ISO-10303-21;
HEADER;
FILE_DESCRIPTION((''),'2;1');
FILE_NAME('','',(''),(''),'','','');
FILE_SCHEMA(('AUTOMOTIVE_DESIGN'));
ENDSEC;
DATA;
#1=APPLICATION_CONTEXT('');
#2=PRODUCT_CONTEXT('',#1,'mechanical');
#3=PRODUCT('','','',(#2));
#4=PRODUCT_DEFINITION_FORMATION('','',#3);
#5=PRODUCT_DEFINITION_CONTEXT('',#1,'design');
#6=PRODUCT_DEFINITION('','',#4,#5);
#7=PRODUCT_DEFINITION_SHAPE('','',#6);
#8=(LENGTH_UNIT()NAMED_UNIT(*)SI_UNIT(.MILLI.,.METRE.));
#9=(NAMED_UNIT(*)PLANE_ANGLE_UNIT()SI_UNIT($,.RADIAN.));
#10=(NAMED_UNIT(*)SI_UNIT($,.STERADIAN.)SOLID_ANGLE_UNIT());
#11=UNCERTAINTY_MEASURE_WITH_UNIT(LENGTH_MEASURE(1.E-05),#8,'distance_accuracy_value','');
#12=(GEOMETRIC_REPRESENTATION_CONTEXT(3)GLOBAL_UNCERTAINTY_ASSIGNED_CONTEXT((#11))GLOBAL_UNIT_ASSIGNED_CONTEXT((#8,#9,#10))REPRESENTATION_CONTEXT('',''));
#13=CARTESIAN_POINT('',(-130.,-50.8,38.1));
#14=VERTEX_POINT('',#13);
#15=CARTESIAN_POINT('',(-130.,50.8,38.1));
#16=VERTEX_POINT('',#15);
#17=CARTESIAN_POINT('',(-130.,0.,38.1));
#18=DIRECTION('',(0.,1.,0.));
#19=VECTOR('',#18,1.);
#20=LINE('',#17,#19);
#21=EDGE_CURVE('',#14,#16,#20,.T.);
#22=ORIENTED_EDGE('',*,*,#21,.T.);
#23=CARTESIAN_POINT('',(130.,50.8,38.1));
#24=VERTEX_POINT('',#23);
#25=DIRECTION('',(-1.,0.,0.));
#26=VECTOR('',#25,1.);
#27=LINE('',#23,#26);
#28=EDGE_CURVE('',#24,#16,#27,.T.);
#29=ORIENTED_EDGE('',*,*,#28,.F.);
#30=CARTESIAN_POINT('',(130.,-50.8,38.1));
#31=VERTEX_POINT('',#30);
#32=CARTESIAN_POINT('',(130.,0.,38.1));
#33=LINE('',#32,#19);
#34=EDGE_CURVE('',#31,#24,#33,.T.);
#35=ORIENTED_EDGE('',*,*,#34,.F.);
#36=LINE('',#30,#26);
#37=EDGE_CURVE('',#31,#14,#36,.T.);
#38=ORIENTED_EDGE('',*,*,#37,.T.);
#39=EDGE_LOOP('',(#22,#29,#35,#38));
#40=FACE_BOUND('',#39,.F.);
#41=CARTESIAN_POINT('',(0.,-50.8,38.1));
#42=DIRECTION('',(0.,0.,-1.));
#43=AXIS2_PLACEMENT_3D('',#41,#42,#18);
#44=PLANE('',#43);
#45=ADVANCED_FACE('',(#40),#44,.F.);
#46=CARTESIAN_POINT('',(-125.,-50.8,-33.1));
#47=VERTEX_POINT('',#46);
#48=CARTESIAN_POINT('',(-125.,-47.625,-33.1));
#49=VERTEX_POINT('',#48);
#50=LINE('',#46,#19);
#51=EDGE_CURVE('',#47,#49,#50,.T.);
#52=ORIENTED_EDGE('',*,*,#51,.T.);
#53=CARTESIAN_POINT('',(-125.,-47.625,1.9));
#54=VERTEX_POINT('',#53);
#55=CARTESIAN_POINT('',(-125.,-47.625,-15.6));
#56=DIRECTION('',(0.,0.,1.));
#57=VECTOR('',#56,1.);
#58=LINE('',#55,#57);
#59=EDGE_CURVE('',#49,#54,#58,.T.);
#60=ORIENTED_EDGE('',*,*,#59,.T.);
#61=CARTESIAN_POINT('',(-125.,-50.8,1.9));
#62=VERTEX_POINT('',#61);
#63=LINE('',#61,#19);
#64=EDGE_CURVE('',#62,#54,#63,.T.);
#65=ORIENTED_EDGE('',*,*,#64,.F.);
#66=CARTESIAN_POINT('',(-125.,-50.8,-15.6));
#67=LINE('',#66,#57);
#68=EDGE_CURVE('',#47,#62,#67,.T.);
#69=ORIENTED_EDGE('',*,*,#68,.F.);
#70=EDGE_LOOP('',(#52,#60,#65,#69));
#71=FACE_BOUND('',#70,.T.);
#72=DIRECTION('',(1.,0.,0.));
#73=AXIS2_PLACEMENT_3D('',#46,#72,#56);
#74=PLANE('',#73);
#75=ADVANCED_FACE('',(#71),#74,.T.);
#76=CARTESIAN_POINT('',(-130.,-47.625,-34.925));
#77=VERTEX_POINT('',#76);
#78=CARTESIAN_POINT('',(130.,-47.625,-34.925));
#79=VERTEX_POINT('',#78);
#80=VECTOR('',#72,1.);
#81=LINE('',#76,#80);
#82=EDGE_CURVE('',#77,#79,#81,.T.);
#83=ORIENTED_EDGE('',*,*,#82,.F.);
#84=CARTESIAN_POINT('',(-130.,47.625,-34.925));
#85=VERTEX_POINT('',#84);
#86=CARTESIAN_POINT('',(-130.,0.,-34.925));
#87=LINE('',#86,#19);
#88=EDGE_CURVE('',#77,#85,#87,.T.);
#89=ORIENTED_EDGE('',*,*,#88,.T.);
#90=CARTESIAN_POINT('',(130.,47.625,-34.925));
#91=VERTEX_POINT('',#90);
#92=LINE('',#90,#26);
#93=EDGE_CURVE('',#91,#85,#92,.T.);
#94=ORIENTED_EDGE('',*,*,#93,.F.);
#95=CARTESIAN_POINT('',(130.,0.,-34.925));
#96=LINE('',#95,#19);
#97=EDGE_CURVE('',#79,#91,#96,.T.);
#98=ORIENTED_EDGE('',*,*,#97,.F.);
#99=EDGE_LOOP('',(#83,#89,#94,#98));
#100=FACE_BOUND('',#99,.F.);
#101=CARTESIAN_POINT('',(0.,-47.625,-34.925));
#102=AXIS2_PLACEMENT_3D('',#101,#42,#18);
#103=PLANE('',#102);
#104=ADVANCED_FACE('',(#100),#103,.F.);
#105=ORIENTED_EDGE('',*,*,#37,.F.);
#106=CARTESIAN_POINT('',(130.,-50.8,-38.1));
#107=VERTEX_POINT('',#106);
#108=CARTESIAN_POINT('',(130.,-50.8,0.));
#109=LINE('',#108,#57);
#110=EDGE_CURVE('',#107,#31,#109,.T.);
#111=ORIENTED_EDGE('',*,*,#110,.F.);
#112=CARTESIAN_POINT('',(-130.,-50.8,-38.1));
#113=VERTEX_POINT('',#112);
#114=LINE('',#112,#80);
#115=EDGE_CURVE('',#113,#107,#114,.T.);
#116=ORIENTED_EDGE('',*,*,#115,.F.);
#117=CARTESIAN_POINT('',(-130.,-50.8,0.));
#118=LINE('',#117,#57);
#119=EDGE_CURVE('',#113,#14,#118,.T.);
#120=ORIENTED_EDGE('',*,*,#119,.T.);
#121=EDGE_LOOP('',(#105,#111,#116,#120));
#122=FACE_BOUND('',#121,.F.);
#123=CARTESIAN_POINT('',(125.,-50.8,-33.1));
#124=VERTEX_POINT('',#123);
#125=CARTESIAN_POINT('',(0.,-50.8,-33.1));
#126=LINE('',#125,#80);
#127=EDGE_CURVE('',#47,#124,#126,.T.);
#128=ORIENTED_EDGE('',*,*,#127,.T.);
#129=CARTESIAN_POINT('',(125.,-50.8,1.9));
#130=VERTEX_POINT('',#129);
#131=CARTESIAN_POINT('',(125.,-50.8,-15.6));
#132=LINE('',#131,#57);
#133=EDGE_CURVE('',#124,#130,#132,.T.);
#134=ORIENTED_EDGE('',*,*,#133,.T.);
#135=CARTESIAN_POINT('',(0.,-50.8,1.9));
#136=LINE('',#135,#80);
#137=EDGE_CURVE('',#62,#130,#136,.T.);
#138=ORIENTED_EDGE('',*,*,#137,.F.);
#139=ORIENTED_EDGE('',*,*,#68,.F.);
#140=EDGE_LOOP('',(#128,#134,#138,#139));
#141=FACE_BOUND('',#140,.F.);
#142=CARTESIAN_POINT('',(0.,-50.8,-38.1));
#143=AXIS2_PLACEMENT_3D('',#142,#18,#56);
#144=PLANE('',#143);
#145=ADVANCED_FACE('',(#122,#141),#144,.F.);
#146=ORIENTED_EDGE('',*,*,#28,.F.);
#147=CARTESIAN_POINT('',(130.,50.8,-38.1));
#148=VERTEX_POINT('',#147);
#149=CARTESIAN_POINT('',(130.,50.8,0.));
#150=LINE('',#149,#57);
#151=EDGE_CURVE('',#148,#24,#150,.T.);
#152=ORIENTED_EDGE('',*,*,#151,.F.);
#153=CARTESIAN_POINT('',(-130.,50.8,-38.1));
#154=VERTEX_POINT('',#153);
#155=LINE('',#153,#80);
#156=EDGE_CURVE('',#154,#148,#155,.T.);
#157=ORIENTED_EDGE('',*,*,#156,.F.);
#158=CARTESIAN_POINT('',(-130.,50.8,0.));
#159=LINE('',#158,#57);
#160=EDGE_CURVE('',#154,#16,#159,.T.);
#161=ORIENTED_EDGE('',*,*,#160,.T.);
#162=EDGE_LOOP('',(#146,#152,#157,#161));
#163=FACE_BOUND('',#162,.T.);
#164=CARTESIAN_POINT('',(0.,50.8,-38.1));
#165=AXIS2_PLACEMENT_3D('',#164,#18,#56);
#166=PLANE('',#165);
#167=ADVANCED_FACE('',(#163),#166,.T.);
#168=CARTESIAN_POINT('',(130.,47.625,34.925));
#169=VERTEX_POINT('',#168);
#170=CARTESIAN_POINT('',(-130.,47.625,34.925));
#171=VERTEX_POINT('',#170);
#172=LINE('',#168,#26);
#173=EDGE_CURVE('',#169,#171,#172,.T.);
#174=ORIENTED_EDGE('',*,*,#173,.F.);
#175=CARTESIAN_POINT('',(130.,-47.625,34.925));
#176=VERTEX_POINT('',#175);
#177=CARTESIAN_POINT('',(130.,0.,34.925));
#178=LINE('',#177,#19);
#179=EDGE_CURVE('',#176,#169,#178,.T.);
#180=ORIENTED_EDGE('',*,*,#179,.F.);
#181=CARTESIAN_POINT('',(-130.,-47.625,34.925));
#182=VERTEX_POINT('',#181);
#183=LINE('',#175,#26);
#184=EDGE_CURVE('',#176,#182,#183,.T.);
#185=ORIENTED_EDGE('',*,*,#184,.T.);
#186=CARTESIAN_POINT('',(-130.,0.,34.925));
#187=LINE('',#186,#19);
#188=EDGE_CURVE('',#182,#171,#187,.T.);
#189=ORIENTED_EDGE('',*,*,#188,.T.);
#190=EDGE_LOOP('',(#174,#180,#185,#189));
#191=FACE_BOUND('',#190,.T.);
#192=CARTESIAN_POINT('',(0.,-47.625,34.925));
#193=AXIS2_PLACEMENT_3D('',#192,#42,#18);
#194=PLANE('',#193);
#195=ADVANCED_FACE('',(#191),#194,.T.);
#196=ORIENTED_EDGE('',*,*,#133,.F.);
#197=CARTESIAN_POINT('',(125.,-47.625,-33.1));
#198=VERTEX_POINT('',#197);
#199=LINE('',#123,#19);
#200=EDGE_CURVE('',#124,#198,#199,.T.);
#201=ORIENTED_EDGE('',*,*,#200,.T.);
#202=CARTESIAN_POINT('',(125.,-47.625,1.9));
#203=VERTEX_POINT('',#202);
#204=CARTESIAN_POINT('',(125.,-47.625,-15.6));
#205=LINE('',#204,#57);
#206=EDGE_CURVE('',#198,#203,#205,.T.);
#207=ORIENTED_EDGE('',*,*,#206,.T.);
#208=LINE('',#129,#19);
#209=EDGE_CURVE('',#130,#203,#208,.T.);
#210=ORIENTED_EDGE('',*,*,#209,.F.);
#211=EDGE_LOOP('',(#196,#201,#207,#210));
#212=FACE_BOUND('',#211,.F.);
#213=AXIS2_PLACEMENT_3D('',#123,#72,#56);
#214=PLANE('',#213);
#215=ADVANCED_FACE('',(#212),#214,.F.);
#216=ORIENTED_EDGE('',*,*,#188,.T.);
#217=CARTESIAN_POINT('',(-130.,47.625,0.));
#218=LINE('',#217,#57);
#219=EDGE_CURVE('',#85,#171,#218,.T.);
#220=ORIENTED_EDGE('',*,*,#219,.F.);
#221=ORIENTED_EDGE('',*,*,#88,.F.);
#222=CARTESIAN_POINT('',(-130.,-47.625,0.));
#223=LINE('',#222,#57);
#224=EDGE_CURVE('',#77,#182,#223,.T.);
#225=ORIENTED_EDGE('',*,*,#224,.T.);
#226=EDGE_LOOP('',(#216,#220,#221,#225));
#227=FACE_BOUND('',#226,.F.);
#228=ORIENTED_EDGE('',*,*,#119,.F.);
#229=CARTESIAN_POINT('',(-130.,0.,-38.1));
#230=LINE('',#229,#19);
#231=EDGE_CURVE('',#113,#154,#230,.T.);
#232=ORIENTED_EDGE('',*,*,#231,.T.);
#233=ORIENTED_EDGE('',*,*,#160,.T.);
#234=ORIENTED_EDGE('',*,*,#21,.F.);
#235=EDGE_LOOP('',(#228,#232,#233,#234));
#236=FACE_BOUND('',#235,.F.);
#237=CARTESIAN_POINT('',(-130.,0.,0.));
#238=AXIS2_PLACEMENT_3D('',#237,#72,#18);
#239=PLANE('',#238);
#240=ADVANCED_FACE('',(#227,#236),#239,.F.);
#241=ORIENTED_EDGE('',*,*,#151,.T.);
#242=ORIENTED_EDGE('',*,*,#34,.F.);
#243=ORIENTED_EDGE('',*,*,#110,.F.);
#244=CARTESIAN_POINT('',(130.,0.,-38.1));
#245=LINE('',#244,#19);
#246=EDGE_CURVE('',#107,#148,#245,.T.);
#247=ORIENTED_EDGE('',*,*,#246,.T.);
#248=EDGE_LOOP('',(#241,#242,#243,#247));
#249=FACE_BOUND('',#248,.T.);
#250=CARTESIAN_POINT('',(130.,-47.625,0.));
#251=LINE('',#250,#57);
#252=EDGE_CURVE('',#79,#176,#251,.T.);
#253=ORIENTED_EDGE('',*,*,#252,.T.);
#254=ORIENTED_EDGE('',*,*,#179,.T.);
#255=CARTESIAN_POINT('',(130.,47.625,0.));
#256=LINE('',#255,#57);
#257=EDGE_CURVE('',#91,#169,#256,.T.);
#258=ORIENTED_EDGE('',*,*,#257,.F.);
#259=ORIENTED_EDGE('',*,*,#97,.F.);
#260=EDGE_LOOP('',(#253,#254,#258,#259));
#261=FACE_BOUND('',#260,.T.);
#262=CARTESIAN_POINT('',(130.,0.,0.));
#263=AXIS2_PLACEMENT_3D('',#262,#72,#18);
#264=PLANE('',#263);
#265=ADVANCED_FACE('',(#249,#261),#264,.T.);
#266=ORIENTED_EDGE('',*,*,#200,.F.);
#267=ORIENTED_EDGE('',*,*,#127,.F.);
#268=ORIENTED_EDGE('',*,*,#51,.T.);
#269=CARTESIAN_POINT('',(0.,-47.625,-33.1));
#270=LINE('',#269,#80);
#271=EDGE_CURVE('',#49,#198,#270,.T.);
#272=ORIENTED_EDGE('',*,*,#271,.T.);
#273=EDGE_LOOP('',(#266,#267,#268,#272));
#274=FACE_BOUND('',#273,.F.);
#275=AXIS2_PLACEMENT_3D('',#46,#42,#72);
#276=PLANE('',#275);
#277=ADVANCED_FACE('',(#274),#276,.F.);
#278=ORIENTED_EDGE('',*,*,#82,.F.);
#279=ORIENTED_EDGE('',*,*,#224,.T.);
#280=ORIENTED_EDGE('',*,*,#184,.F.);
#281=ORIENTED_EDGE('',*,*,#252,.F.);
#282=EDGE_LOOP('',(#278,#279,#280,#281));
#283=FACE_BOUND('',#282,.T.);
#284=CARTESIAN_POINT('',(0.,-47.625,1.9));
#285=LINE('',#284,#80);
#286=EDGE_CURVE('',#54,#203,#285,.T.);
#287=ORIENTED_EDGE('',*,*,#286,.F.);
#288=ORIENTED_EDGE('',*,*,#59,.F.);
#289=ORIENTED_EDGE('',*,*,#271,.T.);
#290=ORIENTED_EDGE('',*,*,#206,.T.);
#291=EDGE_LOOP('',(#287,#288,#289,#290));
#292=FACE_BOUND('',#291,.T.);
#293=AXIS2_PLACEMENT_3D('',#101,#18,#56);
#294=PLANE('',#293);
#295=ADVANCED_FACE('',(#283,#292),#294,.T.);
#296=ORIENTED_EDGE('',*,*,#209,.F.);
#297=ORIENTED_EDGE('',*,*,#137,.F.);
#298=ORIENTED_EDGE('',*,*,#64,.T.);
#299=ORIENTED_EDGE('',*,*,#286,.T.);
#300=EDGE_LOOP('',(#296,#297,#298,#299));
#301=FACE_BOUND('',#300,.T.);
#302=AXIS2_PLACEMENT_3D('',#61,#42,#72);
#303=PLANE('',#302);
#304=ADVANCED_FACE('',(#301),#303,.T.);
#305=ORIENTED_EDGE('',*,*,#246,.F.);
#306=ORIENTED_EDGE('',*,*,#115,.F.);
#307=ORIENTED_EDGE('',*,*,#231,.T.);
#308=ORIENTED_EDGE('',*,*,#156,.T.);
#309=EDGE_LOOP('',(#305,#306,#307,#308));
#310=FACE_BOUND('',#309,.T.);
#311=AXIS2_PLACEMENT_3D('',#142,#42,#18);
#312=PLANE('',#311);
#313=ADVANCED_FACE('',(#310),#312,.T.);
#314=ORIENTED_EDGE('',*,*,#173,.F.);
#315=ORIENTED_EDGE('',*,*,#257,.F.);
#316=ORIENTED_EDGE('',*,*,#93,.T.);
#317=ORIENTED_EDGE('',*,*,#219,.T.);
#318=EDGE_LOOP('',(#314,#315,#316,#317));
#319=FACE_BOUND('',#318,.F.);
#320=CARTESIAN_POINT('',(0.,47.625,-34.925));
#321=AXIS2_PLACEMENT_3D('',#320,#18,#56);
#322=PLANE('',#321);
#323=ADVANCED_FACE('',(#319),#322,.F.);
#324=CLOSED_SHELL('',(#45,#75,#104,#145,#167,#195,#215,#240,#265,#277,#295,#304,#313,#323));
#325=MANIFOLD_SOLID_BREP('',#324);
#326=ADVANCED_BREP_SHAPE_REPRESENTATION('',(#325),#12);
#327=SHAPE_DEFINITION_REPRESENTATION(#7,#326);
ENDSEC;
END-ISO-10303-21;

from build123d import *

# Parameters (mm, degrees)
F0_W     = 101.6
F0_H     = 76.2
F0_W_2   = 95.25
F0_H_2   = 69.85
F1_DEPTH = 130
F2_W     = 250
F2_H     = 35
F3_DEPTH = 3.175


with BuildPart() as f1:
    # F0 (on Right) → F1 (new body, symmetric)
    with BuildSketch(Plane.YZ):
        Rectangle(F0_W, F0_H)
        Rectangle(F0_W_2, F0_H_2, mode=Mode.SUBTRACT)
    extrude(amount=F1_DEPTH, both=True)

    # F2 (on face) → F3 (cut, through all)
    with BuildSketch(Plane.XZ.offset(50.8)):
        with Locations((0, -15.6)):
            Rectangle(F2_W, F2_H)
    extrude(amount=-F3_DEPTH, mode=Mode.SUBTRACT)


solid = f1.part
